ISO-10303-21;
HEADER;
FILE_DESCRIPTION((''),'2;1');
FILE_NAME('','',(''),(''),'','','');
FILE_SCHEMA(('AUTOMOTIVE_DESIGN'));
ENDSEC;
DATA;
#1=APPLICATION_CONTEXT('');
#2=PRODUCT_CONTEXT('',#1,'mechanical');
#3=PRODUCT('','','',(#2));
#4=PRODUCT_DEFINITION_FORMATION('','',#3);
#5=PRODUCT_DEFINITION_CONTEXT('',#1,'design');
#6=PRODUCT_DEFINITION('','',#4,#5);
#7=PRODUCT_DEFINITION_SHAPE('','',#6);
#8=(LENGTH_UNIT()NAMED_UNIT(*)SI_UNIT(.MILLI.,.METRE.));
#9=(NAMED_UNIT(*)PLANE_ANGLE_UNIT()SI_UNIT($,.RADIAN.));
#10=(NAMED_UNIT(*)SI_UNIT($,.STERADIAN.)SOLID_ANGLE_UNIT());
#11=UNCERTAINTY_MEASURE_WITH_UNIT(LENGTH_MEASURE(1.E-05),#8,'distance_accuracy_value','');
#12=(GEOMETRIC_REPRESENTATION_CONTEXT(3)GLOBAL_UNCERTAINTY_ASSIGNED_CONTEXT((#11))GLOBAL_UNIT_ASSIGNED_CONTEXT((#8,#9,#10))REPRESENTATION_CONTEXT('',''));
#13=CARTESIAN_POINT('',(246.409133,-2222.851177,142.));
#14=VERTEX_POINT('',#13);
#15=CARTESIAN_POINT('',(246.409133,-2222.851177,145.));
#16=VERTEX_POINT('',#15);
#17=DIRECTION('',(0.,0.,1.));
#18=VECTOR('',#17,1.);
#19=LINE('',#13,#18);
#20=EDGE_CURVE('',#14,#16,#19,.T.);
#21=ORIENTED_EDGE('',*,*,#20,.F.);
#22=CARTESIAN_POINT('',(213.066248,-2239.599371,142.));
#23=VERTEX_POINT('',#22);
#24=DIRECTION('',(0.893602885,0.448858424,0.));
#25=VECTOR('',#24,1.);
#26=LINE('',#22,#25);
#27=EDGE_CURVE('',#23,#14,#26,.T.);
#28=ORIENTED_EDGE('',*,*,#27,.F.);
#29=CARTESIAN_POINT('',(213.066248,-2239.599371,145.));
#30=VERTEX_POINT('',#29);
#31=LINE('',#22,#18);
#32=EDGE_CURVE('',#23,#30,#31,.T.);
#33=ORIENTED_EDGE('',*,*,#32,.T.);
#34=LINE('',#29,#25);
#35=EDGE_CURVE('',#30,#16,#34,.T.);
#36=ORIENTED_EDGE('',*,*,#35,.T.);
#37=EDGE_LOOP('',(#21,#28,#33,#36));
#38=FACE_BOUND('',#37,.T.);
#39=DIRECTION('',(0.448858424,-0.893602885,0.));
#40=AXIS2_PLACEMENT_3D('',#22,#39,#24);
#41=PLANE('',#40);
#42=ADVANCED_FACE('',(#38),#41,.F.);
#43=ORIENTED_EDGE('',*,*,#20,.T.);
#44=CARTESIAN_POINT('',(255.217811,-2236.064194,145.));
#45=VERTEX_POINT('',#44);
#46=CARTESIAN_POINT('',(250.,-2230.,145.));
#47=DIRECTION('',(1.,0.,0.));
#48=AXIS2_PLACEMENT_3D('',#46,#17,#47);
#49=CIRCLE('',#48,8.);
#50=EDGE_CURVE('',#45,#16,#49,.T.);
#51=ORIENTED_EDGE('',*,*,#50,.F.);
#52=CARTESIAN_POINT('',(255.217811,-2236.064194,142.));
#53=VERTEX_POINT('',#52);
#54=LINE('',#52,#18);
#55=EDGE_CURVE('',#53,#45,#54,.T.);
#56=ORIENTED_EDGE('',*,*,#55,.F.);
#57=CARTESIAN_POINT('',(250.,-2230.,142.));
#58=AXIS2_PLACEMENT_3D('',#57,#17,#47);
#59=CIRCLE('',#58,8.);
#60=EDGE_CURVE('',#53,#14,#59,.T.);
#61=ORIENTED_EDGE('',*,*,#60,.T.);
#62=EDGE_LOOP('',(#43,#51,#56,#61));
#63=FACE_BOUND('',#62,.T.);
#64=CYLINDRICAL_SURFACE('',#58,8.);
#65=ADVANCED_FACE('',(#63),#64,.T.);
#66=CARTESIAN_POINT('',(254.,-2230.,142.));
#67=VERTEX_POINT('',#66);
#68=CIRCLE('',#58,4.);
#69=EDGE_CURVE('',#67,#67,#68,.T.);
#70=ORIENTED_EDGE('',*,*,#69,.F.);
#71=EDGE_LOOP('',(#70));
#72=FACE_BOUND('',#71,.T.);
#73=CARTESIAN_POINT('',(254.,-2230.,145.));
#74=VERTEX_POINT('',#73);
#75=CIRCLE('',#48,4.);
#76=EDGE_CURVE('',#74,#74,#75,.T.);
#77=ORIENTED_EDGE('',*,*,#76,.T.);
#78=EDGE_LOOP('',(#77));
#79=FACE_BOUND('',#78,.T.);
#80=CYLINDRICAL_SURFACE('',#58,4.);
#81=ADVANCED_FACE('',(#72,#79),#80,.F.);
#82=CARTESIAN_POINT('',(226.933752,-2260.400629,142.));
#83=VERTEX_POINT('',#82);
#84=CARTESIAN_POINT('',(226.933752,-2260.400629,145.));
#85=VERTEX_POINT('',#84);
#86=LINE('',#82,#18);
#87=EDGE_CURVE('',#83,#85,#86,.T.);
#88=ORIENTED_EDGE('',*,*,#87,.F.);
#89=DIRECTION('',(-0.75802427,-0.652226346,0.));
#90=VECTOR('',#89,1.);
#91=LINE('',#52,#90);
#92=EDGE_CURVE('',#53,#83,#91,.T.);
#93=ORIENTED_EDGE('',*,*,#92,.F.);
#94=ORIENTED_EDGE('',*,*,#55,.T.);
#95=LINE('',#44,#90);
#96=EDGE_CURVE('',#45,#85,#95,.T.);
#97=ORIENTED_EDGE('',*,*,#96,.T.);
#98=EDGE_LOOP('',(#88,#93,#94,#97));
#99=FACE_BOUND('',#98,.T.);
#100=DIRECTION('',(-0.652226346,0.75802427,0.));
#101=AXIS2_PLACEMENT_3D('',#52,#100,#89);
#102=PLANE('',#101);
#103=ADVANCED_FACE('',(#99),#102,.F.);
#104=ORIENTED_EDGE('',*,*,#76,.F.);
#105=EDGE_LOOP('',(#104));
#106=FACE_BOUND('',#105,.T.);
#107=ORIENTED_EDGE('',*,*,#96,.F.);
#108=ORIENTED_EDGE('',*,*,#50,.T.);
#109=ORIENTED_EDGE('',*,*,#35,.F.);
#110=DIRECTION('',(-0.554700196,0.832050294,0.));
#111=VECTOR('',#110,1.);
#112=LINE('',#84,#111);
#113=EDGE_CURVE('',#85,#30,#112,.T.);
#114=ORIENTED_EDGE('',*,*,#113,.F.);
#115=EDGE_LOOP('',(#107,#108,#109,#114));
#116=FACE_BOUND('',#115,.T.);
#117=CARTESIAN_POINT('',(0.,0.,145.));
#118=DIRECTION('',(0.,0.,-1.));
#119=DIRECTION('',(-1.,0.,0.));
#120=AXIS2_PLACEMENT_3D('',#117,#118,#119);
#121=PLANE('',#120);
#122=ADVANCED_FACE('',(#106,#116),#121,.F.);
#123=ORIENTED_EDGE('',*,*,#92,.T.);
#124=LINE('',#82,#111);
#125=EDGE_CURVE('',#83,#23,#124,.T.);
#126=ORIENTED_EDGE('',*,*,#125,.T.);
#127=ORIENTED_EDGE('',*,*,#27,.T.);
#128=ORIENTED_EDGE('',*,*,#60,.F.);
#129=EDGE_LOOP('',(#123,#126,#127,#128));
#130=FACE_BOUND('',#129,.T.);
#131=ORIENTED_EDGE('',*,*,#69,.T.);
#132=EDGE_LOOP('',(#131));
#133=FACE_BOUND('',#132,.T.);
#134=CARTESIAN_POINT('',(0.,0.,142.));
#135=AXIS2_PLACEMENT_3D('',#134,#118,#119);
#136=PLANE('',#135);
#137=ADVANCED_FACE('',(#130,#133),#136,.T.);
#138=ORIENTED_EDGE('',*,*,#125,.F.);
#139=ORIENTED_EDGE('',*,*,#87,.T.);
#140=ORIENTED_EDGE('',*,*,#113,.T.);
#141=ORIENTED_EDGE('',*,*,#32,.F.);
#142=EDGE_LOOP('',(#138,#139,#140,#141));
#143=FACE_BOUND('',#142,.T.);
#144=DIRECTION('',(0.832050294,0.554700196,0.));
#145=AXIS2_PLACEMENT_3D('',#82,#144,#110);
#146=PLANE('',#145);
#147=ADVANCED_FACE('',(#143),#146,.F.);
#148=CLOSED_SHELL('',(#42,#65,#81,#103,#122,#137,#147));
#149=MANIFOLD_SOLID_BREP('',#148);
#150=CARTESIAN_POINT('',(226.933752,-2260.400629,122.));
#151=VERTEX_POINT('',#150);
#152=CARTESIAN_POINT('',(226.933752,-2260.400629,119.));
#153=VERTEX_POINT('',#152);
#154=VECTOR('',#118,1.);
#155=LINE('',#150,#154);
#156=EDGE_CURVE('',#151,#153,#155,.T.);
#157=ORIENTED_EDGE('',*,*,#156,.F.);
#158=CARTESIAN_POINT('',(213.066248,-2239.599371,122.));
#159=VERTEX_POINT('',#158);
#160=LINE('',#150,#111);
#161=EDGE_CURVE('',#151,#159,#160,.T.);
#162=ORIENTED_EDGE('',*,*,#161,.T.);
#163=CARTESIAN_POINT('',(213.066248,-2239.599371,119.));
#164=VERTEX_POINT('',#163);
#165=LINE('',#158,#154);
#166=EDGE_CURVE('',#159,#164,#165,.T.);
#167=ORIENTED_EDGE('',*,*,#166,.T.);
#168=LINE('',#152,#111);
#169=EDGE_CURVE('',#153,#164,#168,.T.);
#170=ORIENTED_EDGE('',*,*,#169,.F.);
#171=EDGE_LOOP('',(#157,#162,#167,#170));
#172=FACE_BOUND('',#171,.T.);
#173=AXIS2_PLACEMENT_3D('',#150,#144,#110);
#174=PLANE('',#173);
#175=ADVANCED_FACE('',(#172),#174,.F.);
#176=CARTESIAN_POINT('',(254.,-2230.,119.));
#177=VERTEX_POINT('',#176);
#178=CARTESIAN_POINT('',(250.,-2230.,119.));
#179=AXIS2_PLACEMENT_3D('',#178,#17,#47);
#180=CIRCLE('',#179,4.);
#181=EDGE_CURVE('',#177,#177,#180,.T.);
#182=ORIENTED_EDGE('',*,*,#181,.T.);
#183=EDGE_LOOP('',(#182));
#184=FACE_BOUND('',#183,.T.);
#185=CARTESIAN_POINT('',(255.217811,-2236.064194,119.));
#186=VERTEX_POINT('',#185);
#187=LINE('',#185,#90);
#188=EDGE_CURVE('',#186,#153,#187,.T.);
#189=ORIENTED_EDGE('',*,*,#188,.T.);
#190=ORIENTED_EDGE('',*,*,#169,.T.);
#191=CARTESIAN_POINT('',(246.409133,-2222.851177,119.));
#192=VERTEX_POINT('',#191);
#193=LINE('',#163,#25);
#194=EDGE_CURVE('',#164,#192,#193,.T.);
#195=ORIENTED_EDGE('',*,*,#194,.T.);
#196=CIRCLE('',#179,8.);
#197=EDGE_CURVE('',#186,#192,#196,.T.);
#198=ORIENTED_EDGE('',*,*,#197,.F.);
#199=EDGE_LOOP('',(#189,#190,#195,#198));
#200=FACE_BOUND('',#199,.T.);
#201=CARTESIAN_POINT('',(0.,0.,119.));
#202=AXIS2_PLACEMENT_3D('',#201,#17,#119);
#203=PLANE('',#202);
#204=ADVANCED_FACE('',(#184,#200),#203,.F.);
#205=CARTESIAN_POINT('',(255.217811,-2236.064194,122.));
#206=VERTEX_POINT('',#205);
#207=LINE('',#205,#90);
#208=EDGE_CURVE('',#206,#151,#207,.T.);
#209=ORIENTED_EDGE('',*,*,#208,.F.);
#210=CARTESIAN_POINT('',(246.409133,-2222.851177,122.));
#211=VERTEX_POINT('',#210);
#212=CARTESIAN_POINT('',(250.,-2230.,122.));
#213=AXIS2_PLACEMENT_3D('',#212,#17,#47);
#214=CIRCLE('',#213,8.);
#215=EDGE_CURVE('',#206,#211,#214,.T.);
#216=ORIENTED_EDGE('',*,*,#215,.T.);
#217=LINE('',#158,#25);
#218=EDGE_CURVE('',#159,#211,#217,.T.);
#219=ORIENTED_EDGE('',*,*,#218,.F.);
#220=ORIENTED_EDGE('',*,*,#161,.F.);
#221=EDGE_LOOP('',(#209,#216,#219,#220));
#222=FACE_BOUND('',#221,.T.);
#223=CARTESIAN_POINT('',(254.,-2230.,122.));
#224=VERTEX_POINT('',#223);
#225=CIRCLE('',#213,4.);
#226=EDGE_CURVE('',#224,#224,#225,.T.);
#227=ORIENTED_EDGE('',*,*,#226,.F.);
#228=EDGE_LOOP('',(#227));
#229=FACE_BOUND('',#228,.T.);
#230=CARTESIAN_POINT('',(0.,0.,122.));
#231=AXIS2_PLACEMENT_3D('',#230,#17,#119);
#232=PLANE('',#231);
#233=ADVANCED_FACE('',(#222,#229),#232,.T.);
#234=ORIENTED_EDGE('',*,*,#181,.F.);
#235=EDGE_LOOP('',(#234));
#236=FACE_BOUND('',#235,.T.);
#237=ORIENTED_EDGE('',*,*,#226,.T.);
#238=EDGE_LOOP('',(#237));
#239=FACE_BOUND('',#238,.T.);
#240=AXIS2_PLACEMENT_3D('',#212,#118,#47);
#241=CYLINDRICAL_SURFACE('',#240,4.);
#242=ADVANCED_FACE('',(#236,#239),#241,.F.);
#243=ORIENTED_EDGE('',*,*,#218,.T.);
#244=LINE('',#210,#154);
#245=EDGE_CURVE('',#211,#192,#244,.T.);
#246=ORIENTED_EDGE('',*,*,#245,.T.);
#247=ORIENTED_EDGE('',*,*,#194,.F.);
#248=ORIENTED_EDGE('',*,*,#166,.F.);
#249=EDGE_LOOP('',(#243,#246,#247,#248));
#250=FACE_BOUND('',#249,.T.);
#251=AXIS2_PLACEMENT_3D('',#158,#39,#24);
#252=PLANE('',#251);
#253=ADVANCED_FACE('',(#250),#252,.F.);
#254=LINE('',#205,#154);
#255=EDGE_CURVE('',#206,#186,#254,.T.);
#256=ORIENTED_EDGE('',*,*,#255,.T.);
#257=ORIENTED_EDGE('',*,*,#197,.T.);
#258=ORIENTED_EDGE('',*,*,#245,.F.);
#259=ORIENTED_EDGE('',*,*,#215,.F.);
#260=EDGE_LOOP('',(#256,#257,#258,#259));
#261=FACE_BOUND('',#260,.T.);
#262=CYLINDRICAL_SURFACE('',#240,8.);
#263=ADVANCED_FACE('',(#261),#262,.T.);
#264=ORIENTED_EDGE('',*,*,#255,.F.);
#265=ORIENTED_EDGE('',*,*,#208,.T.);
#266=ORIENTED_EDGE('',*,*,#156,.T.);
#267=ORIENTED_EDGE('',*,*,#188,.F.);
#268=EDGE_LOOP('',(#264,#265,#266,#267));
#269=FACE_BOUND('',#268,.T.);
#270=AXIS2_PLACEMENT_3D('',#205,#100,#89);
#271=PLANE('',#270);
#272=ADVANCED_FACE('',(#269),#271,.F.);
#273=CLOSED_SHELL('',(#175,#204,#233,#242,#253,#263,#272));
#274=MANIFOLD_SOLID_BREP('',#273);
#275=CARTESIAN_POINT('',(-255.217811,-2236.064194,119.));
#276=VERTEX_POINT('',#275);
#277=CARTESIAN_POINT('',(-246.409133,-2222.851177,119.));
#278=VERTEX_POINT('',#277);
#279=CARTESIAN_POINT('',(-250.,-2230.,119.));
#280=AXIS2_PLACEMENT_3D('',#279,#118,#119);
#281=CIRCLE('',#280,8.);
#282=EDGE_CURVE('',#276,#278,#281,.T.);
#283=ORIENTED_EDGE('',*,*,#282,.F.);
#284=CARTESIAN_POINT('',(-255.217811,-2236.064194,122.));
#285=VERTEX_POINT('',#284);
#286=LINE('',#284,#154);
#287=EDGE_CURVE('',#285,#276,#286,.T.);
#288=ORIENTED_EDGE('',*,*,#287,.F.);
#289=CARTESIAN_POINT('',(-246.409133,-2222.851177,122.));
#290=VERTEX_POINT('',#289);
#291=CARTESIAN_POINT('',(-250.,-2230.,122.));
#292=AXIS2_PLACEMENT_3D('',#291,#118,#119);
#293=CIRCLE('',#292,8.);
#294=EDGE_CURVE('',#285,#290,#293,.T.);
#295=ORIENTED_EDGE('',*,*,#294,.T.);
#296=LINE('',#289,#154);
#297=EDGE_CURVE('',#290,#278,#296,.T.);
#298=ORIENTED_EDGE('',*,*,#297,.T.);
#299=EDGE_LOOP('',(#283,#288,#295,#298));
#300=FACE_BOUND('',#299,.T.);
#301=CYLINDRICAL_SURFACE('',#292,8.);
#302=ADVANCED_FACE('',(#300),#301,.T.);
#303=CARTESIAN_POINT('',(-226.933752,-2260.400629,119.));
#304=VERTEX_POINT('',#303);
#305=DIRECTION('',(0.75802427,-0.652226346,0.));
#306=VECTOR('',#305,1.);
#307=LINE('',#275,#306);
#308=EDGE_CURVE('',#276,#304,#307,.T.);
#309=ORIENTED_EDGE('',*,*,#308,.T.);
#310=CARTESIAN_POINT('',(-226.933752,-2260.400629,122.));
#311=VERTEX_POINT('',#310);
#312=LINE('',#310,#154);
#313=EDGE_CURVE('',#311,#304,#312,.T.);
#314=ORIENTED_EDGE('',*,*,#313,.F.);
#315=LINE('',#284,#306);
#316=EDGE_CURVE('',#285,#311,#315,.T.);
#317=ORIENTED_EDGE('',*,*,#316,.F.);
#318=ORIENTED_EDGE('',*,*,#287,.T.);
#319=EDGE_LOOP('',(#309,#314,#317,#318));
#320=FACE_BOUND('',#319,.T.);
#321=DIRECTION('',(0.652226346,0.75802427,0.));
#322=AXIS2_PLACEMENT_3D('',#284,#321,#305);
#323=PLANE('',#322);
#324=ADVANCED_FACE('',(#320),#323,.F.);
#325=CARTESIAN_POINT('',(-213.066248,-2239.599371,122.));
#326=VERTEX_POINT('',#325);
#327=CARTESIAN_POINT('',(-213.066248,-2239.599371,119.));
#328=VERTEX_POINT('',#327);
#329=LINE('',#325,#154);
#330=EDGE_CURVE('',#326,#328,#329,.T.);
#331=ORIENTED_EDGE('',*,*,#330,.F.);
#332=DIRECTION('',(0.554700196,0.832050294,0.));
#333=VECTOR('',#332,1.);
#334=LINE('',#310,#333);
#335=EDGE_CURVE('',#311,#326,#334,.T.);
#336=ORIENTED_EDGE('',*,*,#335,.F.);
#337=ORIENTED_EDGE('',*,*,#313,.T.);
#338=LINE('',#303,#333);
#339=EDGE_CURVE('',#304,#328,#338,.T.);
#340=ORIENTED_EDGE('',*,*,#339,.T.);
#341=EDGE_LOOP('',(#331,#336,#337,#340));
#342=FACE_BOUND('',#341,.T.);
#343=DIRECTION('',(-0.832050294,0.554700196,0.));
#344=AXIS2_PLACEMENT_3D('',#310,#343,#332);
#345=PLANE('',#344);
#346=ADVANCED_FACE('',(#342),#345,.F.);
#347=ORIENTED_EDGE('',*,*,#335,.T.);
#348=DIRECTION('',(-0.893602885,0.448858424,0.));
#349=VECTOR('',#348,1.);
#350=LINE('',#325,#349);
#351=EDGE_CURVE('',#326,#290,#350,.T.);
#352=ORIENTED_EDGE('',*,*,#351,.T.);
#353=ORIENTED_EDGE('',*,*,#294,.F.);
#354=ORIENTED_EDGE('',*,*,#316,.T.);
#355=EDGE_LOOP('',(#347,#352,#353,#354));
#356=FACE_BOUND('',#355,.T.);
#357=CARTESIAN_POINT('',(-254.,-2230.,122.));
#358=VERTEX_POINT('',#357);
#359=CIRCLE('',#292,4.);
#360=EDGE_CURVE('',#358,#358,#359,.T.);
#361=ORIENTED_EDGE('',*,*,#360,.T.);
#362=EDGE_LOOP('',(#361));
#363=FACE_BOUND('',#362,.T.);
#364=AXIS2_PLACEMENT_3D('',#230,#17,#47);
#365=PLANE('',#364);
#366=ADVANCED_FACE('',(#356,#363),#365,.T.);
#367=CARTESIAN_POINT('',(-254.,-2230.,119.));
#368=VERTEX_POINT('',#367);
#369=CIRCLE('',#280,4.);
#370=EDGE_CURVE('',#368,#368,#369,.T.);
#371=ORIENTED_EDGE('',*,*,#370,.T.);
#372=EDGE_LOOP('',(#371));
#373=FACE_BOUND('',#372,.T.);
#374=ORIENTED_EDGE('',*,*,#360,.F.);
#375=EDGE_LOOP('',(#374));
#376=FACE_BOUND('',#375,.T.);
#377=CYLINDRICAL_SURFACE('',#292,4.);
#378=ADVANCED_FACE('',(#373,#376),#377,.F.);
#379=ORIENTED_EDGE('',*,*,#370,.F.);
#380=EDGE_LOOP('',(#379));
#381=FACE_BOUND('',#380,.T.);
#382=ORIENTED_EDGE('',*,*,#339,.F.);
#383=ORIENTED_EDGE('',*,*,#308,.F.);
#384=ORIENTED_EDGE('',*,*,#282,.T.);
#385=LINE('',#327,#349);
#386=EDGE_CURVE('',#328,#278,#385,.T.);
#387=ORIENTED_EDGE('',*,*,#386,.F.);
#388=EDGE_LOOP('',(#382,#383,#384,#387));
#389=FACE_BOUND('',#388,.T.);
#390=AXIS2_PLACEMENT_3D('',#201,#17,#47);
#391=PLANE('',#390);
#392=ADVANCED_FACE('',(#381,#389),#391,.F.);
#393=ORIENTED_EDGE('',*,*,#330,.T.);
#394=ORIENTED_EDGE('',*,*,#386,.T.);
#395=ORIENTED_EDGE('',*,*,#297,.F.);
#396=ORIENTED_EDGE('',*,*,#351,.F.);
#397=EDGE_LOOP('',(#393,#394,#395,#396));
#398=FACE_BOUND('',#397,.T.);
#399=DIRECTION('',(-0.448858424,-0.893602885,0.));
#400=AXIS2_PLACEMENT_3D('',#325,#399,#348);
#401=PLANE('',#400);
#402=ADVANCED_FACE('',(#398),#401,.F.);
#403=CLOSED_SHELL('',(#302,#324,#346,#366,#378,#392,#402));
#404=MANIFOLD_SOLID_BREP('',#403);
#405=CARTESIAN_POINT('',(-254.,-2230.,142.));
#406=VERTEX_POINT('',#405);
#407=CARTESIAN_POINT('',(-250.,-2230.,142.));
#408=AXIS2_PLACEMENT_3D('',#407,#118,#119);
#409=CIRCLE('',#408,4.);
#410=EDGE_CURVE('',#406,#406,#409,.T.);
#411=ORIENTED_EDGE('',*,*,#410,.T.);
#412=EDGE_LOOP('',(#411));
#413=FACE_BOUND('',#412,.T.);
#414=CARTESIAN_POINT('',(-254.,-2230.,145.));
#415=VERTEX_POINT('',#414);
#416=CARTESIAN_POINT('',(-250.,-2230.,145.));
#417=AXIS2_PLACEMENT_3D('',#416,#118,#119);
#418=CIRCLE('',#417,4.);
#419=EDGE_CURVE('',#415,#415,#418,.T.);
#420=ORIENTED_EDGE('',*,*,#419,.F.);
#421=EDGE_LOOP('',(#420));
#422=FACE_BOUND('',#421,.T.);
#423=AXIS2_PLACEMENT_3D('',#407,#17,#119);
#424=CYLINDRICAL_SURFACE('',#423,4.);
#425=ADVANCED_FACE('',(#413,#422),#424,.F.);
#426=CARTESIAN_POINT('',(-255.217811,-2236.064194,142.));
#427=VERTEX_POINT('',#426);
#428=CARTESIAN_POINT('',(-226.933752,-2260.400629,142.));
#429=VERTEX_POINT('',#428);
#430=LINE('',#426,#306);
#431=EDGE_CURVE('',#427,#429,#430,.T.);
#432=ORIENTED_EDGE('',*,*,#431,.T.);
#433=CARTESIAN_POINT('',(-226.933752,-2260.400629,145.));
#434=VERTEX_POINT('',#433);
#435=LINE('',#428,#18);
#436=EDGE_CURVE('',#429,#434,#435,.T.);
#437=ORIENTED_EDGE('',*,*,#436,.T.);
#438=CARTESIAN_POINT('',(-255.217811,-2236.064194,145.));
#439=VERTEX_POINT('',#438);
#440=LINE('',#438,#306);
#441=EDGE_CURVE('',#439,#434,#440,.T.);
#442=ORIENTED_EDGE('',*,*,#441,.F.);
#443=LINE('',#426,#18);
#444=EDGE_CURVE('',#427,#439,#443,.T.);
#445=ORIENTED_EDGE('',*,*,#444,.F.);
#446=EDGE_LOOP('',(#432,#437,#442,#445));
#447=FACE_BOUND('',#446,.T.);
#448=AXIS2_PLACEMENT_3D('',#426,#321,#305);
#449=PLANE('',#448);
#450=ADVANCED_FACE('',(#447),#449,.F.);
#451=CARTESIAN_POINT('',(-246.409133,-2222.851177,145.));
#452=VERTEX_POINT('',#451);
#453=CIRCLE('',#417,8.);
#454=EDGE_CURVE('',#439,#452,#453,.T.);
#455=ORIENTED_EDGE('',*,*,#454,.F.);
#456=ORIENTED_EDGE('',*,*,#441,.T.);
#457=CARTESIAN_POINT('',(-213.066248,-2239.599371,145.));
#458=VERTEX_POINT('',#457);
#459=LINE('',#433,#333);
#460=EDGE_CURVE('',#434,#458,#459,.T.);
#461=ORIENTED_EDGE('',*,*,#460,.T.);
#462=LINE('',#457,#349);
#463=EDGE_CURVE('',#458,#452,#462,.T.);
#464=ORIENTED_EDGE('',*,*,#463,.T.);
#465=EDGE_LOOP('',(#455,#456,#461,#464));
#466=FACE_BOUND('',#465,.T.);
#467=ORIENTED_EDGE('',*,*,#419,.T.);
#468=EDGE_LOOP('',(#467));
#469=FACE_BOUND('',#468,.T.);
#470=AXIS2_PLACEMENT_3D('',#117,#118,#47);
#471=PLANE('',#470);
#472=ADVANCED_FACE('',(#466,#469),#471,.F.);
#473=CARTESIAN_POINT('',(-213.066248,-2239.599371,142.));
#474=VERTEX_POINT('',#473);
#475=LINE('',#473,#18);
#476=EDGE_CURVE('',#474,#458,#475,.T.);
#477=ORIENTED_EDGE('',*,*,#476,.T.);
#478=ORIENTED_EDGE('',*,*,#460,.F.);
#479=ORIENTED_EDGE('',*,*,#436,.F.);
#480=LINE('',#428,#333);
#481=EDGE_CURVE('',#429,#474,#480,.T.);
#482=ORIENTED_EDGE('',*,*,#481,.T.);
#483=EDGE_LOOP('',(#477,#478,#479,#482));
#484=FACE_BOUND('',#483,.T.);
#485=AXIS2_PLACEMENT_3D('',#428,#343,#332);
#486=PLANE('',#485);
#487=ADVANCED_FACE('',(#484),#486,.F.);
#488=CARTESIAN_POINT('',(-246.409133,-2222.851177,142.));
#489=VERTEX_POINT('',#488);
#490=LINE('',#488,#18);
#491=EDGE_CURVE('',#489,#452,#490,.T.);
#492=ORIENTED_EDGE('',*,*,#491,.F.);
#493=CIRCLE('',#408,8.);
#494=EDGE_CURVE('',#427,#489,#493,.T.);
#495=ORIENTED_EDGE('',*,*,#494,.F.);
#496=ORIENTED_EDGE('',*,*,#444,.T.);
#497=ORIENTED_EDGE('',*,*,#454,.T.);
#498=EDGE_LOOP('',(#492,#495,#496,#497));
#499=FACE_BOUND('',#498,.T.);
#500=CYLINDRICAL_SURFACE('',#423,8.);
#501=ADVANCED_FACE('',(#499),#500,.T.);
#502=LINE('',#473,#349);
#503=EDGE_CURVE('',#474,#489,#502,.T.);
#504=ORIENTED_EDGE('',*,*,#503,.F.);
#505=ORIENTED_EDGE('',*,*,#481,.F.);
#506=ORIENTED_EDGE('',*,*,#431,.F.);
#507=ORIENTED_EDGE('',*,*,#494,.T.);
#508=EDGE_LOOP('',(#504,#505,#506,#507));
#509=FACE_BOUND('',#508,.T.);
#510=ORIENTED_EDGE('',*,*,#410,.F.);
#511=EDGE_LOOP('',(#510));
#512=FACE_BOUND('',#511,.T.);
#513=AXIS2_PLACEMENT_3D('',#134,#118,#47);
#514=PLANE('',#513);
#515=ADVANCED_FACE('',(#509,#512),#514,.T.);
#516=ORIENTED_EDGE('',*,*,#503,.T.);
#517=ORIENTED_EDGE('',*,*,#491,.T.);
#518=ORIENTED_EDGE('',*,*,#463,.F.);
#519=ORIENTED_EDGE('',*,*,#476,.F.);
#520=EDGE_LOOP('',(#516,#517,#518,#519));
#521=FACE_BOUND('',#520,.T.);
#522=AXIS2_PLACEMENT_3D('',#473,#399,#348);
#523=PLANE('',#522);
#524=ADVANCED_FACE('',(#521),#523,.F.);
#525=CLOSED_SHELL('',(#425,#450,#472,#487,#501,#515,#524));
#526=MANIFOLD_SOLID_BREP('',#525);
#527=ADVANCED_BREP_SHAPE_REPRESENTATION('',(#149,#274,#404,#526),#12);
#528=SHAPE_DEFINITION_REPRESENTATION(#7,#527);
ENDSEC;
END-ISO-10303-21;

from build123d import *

# Parameters (mm, degrees)
BOSS_EXTRUDE1_START     = 142
BOSS_EXTRUDE1_OUTLINE_R = 4
BOSS_EXTRUDE1_DEPTH     = 3


# Read off the part's stored shape, not the designer's step: Boss-Extrude1
with BuildPart() as part:
    # Boss-Extrude1 outline → Boss-Extrude1 (new body)
    with BuildSketch(Plane.XY.offset(BOSS_EXTRUDE1_START)):
        with BuildLine():
            Line((226.933752453, -2260.400628679), (255.217810768, -2236.064194158))
            ThreePointArc((255.217810768, -2236.064194158), (256.656402355, -2225.56239843), (246.409132611, -2222.851176922))
            Line((246.409132611, -2222.851176922), (213.066247547, -2239.599371321))
            Line((213.066247547, -2239.599371321), (226.933752453, -2260.400628679))
        make_face()
        with Locations((250, -2230)):
            Circle(BOSS_EXTRUDE1_OUTLINE_R, mode=Mode.SUBTRACT)
    extrude(amount=BOSS_EXTRUDE1_DEPTH)


with BuildPart() as body_2:
    # Mirror1: mirrored copy
    add(part.part.mirror(Plane(origin=(0, 0, 132), x_dir=(1, 0, 0), z_dir=(0, 0, -1))))


with BuildPart() as body_3:
    # Mirror2: mirrored copy
    add(part.part.mirror(Plane(origin=(0, 0, 0), x_dir=(0, 0, 1), z_dir=(1, 0, 0))))


with BuildPart() as body_4:
    # Mirror2 2: mirrored copy
    add(body_2.part.mirror(Plane(origin=(0, 0, 0), x_dir=(0, 0, 1), z_dir=(1, 0, 0))))


solid = Compound([part.part, body_2.part, body_3.part, body_4.part])
